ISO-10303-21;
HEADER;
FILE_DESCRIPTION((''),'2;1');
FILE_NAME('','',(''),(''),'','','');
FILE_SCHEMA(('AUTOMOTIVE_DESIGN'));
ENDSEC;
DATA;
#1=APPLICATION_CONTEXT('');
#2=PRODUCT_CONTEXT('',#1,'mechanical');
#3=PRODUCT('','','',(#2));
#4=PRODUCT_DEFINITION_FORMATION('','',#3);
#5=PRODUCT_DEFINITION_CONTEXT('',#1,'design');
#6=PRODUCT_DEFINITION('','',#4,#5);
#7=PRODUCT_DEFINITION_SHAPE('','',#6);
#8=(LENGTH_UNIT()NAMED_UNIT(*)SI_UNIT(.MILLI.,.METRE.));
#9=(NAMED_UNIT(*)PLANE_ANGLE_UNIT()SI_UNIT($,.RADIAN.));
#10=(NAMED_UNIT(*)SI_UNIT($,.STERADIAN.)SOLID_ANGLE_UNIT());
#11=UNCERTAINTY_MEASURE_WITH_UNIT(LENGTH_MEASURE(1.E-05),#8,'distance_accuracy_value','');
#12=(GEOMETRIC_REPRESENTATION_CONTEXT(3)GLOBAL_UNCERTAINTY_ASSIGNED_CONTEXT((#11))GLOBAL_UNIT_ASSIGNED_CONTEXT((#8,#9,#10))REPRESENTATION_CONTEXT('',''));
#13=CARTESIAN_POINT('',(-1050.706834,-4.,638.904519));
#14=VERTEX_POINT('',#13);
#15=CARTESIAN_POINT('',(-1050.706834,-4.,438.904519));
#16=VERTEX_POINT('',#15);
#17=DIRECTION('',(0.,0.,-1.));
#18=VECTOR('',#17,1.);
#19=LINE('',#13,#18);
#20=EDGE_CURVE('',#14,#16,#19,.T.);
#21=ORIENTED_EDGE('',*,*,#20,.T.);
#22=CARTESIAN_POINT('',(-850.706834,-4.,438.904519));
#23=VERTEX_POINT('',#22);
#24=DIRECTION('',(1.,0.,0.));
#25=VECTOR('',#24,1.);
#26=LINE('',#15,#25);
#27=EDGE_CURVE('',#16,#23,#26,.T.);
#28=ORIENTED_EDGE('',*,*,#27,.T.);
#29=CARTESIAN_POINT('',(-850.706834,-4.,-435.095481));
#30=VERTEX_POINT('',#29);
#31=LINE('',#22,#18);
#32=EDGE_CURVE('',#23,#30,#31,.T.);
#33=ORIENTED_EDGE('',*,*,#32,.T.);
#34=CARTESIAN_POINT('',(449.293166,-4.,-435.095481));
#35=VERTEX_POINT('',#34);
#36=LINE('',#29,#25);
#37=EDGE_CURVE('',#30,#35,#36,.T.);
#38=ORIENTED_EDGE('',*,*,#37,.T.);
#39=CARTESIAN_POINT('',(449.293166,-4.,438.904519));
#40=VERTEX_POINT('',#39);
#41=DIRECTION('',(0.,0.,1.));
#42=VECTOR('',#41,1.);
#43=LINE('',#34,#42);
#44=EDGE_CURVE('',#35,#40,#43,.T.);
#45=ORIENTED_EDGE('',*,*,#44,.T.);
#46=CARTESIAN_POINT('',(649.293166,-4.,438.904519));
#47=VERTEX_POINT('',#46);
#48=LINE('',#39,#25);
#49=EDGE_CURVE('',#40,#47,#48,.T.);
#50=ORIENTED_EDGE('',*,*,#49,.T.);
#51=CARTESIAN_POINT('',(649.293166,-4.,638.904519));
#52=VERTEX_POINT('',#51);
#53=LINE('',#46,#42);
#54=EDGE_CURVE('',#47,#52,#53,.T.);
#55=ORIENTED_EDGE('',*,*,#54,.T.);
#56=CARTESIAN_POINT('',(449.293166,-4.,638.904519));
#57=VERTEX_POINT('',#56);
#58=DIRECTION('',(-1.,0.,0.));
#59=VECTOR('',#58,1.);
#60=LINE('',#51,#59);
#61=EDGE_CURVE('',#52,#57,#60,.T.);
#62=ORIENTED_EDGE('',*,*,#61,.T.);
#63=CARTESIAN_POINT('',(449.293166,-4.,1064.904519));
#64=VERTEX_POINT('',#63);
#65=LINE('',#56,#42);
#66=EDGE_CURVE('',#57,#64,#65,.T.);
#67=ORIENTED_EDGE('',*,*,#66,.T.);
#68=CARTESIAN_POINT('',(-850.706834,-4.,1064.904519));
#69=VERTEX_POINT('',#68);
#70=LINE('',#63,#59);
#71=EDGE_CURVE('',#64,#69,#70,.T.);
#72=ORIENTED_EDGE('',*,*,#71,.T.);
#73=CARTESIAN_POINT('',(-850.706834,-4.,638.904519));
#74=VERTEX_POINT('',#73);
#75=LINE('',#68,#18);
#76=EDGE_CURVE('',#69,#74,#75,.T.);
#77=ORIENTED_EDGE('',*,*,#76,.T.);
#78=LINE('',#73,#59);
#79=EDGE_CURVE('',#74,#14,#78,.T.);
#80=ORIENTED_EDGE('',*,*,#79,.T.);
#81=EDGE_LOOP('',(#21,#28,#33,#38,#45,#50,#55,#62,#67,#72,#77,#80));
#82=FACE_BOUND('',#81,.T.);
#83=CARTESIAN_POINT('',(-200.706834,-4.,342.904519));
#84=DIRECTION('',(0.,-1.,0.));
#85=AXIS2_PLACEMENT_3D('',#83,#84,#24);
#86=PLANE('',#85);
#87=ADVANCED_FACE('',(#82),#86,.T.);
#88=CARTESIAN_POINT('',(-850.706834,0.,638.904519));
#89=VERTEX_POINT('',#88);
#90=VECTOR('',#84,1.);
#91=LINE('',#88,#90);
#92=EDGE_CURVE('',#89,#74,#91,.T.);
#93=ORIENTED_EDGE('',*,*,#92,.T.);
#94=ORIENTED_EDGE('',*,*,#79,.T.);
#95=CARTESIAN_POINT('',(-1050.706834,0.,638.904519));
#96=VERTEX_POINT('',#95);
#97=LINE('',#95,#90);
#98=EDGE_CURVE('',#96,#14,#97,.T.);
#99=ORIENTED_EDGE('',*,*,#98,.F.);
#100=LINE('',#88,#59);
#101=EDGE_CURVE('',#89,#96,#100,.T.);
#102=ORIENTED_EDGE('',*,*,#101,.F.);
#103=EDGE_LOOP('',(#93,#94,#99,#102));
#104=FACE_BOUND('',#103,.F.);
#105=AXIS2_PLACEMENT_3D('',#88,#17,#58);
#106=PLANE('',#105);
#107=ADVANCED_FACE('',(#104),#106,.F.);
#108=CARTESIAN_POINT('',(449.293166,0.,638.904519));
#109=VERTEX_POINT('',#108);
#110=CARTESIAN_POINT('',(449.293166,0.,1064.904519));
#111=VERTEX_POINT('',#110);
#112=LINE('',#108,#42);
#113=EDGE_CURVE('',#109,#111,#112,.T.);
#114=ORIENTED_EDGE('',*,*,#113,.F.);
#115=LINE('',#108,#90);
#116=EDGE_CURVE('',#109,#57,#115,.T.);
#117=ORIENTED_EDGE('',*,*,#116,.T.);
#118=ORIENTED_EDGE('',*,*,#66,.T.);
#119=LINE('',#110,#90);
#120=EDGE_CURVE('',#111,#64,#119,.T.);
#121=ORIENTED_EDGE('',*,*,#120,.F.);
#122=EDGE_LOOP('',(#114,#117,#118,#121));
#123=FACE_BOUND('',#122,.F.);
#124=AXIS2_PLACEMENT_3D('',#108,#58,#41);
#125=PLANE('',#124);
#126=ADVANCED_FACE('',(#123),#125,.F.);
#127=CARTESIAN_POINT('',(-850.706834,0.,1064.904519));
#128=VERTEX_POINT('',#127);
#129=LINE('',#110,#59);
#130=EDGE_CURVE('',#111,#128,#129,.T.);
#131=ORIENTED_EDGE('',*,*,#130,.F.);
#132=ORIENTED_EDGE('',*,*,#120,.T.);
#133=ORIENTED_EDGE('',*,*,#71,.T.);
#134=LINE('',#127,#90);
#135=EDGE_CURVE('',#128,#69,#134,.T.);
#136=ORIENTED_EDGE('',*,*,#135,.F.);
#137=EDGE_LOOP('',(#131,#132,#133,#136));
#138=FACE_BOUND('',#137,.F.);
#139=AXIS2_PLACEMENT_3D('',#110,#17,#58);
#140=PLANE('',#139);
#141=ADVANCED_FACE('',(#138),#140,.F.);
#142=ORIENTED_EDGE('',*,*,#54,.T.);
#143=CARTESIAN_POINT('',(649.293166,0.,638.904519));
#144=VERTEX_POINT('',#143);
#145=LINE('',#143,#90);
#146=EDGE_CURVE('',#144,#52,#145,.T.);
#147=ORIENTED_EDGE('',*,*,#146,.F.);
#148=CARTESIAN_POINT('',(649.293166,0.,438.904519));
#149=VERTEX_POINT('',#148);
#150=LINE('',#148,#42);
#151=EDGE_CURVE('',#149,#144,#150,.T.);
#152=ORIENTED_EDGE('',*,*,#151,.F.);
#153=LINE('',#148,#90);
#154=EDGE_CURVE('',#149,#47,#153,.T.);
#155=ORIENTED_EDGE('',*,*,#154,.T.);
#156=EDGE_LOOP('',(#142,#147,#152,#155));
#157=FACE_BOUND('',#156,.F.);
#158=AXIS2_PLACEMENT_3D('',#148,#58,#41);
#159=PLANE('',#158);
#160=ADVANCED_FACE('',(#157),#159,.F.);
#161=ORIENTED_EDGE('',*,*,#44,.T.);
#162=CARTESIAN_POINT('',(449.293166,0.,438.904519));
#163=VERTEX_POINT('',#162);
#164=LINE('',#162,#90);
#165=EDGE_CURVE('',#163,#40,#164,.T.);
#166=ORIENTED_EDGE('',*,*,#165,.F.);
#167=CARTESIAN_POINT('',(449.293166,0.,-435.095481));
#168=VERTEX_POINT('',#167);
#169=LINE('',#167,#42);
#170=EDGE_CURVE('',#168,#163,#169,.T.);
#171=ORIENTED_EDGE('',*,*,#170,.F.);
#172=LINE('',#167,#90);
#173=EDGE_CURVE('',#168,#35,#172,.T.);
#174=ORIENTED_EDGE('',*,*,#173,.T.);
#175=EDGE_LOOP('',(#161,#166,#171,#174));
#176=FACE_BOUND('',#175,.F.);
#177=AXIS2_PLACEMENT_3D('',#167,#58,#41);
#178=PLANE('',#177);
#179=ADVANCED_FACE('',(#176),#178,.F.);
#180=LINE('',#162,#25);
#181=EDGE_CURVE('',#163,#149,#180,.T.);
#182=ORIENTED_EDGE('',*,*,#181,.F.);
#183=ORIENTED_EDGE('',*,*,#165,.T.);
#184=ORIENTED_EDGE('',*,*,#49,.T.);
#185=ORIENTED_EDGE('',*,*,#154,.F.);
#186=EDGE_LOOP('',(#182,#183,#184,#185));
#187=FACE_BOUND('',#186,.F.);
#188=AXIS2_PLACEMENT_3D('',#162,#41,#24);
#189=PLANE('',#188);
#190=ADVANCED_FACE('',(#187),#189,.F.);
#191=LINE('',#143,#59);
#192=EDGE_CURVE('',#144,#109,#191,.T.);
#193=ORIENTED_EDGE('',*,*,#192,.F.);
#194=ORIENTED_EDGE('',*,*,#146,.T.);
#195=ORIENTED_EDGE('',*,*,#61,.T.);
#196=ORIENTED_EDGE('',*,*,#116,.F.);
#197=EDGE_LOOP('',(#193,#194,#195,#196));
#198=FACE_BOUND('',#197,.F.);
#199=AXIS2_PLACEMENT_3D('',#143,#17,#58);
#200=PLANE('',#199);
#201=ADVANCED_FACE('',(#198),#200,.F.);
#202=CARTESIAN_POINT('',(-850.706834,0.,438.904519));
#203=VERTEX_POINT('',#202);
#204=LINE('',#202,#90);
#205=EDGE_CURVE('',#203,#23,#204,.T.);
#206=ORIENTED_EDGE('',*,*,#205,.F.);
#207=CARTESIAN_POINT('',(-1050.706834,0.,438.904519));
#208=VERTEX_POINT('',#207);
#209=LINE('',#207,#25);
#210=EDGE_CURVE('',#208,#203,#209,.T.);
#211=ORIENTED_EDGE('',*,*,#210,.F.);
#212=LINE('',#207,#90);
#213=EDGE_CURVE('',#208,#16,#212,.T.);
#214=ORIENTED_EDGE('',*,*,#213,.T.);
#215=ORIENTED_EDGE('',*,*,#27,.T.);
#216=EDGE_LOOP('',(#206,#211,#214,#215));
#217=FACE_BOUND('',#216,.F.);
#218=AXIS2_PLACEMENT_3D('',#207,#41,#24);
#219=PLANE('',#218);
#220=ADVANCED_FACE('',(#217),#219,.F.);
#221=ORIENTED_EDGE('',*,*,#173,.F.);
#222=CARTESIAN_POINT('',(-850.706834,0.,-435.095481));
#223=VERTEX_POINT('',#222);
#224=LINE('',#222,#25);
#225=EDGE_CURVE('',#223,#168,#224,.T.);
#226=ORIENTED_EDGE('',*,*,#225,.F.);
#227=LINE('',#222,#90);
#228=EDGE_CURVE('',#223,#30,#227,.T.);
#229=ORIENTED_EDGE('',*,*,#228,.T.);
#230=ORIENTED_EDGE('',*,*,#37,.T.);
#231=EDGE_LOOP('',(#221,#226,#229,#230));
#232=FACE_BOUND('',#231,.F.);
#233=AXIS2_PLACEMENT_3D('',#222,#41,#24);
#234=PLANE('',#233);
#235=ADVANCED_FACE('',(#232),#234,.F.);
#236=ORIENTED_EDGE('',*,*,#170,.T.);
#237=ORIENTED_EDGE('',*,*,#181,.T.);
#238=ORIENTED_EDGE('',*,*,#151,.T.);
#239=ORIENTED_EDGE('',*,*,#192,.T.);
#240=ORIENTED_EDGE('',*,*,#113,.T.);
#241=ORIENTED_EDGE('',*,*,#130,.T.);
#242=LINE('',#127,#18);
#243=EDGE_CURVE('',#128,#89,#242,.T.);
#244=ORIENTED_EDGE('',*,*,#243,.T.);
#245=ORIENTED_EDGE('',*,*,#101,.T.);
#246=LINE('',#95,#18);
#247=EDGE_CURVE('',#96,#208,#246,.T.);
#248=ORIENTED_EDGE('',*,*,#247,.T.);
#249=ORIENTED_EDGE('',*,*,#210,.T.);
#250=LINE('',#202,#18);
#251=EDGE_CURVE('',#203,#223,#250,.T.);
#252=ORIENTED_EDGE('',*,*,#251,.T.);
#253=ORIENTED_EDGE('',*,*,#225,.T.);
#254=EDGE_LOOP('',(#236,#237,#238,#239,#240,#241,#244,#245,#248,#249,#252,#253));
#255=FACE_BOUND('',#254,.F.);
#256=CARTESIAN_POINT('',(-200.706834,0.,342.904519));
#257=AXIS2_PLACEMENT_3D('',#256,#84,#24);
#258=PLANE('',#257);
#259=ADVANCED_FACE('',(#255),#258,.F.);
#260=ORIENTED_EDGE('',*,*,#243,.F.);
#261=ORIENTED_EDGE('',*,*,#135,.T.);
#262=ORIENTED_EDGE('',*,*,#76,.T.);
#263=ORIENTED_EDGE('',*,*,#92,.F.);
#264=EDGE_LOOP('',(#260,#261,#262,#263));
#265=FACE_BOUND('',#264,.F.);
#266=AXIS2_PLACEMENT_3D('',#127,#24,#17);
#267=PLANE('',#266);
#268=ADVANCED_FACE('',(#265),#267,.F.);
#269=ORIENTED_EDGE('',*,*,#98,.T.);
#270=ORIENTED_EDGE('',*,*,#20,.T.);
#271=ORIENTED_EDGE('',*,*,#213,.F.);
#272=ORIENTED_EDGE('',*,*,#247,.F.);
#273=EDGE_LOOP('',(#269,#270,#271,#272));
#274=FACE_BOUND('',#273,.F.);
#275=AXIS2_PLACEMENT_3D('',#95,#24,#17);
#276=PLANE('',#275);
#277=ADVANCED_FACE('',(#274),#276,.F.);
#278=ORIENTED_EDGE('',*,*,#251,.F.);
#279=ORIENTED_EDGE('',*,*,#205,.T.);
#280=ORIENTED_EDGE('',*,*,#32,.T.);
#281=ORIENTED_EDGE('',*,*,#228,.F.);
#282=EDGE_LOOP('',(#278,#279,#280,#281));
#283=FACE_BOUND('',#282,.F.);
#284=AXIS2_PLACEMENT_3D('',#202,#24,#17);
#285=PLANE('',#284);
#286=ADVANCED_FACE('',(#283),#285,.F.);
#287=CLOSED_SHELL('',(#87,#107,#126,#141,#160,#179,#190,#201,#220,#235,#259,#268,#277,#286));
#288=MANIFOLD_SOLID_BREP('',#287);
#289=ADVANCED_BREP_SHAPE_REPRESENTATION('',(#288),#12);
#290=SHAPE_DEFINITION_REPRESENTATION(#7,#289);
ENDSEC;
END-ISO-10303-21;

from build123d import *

# Parameters (mm, degrees)
F1_DEPTH = 4


# Not quite as in the source:
# - a feature names something its author has since deleted; it is built from what else it names


with BuildPart() as f1:
    # F0 (on Front) → F1 (new body)
    with BuildSketch(Plane.XZ):
        Polygon((649.293166399, 438.9045192336), (649.293166399, 638.9045192336), (449.293166399, 638.9045192336), (449.293166399, 1064.9045192336), (-850.706833601, 1064.9045192336), (-850.706833601, 638.9045192336), (-1050.706833601, 638.9045192336), (-1050.706833601, 438.9045192336), (-850.706833601, 438.9045192336), (-850.706833601, -435.0954807664), (449.293166399, -435.0954807664), (449.293166399, 438.9045192336), align=None)
    extrude(amount=F1_DEPTH)


solid = f1.part
